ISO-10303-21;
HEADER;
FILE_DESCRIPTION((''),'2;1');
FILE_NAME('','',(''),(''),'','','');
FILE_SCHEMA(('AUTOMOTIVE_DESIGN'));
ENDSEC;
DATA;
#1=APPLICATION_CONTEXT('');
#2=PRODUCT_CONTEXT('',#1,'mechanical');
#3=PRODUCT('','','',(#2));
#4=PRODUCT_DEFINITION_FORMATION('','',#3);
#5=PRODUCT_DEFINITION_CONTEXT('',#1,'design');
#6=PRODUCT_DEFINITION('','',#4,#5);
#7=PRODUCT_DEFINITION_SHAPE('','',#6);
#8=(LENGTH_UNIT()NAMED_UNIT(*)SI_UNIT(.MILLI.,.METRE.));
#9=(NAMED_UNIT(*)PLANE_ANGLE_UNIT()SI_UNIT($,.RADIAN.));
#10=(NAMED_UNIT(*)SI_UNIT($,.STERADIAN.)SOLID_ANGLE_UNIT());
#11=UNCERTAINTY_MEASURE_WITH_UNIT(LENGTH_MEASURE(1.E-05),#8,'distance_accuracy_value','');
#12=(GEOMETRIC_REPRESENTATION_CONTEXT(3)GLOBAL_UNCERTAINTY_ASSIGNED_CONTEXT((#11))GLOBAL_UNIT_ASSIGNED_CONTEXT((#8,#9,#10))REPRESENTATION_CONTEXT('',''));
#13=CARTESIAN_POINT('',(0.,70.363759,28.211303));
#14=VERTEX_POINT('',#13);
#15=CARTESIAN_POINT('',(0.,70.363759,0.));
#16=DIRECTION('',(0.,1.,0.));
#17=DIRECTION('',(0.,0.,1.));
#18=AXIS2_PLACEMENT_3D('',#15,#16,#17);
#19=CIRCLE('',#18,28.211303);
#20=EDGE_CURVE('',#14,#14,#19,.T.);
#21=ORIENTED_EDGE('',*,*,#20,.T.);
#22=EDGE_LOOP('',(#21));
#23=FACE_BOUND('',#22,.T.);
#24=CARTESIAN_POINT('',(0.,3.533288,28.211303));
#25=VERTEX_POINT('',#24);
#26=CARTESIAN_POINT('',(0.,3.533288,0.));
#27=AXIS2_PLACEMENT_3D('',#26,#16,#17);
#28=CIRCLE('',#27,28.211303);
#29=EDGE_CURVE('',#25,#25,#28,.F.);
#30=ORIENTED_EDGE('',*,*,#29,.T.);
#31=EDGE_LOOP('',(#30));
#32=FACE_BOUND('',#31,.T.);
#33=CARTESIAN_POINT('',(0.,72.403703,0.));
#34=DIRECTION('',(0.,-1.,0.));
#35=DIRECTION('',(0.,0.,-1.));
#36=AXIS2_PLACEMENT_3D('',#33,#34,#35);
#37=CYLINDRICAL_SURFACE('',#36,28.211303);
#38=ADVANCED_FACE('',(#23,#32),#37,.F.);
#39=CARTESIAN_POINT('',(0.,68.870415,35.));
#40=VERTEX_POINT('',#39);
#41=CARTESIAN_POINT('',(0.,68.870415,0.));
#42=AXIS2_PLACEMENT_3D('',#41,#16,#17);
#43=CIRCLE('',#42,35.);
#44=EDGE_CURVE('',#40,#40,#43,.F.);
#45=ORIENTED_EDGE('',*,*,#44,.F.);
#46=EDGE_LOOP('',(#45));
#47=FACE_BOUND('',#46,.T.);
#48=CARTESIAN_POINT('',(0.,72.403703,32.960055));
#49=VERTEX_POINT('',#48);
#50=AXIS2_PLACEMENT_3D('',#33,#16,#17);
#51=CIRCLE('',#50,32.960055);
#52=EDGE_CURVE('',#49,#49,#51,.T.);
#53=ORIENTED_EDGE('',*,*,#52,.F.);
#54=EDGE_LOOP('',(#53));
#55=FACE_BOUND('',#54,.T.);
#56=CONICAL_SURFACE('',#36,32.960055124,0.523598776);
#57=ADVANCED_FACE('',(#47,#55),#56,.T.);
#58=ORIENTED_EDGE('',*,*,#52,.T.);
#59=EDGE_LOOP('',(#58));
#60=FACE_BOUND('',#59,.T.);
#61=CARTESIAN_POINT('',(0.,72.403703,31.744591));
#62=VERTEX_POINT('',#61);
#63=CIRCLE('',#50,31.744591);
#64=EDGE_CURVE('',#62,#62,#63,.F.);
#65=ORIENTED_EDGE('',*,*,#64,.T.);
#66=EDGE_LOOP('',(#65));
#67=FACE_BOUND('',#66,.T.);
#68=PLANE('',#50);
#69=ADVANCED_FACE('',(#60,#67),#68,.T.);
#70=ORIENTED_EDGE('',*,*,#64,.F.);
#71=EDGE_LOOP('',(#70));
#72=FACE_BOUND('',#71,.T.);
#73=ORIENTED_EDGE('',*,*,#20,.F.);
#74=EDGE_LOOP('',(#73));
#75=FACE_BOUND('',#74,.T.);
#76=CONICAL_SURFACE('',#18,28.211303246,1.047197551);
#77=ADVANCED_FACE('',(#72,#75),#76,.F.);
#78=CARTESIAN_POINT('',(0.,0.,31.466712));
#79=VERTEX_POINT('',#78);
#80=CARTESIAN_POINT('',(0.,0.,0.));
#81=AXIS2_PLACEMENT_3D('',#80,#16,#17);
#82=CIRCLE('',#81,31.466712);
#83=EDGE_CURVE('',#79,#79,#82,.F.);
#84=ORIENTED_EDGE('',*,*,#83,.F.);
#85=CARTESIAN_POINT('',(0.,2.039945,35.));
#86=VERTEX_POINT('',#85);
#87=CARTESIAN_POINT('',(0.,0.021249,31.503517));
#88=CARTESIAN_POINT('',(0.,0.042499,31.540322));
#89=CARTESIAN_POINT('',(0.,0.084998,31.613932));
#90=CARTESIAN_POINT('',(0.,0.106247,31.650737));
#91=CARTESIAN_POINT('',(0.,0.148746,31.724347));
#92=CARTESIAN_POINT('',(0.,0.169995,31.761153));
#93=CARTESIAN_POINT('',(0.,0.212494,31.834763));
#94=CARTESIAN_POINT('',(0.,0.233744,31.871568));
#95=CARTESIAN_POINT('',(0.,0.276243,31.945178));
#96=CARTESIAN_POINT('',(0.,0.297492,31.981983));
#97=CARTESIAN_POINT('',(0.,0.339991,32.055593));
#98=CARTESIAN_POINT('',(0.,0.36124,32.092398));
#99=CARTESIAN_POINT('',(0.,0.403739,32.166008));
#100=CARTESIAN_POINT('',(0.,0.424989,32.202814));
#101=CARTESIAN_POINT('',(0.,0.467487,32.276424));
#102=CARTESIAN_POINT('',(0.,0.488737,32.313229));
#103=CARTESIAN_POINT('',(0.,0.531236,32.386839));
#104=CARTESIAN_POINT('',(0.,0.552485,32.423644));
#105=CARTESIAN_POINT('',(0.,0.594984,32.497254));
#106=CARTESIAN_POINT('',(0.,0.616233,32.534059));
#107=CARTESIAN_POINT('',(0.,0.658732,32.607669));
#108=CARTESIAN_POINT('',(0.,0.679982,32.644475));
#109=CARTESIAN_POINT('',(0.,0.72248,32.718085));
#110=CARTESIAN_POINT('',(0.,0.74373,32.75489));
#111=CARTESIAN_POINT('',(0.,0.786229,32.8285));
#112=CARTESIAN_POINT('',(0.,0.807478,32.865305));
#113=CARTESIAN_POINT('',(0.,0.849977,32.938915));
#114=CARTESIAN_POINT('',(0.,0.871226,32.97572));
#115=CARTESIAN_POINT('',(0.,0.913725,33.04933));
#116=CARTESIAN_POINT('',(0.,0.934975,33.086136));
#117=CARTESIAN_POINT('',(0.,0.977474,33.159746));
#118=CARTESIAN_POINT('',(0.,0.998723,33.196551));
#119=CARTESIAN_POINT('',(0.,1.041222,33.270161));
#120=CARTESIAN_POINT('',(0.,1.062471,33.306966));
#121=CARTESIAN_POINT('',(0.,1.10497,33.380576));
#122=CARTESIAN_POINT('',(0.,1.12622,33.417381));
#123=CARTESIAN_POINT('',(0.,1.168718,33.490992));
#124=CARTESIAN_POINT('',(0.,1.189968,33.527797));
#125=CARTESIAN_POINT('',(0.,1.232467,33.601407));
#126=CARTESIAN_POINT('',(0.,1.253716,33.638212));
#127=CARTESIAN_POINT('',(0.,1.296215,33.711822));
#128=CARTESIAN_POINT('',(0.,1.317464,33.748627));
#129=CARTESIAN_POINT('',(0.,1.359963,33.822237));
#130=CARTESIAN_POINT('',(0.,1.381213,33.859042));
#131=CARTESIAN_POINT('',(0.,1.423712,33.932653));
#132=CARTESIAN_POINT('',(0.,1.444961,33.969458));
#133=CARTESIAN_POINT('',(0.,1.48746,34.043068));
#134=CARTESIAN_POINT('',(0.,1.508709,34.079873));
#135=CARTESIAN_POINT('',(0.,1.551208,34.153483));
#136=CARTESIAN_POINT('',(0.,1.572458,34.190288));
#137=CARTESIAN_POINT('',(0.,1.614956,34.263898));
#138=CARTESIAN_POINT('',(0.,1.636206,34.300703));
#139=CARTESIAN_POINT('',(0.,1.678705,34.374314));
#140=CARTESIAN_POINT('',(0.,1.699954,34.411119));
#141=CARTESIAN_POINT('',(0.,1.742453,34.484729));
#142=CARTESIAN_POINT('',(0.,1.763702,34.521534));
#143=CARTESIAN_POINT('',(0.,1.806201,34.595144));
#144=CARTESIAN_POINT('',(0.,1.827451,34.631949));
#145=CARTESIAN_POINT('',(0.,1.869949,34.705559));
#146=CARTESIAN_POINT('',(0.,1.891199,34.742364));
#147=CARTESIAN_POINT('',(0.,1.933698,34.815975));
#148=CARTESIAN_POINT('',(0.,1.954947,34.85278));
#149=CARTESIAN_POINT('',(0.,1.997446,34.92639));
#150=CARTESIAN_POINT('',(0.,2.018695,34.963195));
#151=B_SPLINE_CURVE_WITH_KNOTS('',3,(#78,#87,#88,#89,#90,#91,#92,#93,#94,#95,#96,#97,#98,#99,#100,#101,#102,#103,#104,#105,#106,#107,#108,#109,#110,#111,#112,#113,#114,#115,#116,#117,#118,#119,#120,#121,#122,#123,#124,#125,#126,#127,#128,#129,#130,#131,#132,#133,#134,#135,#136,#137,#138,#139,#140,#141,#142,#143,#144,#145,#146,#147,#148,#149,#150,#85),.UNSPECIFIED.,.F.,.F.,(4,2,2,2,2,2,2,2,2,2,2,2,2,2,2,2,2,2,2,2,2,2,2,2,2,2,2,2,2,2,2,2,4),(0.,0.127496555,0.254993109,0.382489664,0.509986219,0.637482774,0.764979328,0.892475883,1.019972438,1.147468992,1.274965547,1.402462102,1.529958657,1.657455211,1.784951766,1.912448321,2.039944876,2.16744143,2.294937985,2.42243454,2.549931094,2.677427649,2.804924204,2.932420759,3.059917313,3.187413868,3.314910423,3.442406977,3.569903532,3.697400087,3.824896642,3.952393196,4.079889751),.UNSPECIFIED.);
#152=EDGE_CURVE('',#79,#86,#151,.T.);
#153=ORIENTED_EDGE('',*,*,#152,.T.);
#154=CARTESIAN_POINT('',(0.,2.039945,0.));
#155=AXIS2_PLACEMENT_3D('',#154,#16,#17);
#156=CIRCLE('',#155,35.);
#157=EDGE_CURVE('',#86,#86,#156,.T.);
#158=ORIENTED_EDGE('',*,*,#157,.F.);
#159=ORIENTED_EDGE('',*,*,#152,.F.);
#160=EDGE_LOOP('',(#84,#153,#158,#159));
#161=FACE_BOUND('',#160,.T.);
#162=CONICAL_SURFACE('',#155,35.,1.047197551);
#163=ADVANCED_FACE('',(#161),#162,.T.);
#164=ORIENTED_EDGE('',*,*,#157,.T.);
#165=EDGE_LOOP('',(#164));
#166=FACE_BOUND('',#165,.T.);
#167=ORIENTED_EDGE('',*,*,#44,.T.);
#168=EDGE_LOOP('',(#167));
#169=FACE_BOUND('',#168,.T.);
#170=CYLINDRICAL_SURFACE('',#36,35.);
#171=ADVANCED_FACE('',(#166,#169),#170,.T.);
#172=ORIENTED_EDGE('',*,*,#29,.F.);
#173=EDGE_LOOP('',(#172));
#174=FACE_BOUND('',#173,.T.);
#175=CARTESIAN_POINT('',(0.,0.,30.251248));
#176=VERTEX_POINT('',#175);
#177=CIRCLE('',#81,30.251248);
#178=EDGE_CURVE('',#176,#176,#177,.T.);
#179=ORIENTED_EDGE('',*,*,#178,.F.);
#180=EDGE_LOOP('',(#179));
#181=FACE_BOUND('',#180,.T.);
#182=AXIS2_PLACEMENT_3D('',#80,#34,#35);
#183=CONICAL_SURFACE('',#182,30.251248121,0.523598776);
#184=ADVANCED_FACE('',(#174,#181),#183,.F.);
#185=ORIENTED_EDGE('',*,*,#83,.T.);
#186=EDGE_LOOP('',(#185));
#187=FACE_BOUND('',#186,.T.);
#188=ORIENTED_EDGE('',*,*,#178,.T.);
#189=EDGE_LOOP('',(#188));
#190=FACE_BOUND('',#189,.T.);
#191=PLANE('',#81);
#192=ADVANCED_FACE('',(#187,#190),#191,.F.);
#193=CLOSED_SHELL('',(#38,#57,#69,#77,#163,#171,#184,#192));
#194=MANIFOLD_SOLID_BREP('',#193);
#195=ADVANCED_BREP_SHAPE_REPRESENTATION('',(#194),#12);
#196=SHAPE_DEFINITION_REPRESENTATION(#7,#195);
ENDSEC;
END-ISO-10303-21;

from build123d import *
from OCP.BRepFilletAPI import BRepFilletAPI_MakeChamfer

# Parameters (mm, degrees)
SKETCH1_R           = 35
BOSS_EXTRUDE1_DEPTH = 72.403703457
SKETCH2_R           = 28.211303246
CUT_EXTRUDE1_DEPTH  = 88.705736838
CHAMFER1_SIZE       = 3.533288169
CHAMFER1_SIZE2      = 2.039944876


with BuildPart() as part:
    # Sketch1 → Boss-Extrude1 (new body)
    with BuildSketch(Plane(origin=(0, 0, 0), x_dir=(1, 0, 0), z_dir=(0, 1, 0))):
        Circle(SKETCH1_R)
    extrude(amount=BOSS_EXTRUDE1_DEPTH)

    # Sketch2 → Cut-Extrude1 (cut, through all)
    with BuildSketch(Plane(origin=(0, 0, 0), x_dir=(1, 0, 0), z_dir=(0, 1, 0))):
        Circle(SKETCH2_R)
    extrude(amount=CUT_EXTRUDE1_DEPTH, mode=Mode.SUBTRACT)

    # Chamfer1: one chamfer whose edges measure the first distance from different faces: ONE call of the kernel's chamfer builder (chamfer() names one face for all edges)
    chamfer1_edges_1 = [part.edges().sort_by_distance(p)[0] for p in [
        (-28.211303246, 72.403703457, 0),
    ]]
    chamfer1_side_1 = [part.faces().sort_by_distance(p)[0] for p in [
        (-34.010050506, 72.403703457, 0),
    ]]
    chamfer1_edges_2 = [part.edges().sort_by_distance(p)[0] for p in [
        (-28.211303246, 0, 0),
    ]]
    chamfer1_side_2 = [part.faces().sort_by_distance(p)[0] for p in [
        (-28.211303246, 36.201851729, 0),
    ]]
    chamfer1_edges_3 = [part.edges().sort_by_distance(p)[0] for p in [
        (-35, 0, 0),
    ]]
    chamfer1_side_3 = [part.faces().sort_by_distance(p)[0] for p in [
        (-34.010050506, 0, 0),
    ]]
    chamfer1_edges_4 = [part.edges().sort_by_distance(p)[0] for p in [
        (-35, 72.403703457, 0),
    ]]
    chamfer1_side_4 = [part.faces().sort_by_distance(p)[0] for p in [
        (-35, 36.201851729, 0),
    ]]
    chamfer1 = BRepFilletAPI_MakeChamfer(part.part.solid().wrapped)
    for e in chamfer1_edges_1:
        chamfer1.Add(CHAMFER1_SIZE, CHAMFER1_SIZE2, e.wrapped, chamfer1_side_1[0].wrapped)  # the first distance lies on this face
    for e in chamfer1_edges_2:
        chamfer1.Add(CHAMFER1_SIZE, CHAMFER1_SIZE2, e.wrapped, chamfer1_side_2[0].wrapped)  # the first distance lies on this face
    for e in chamfer1_edges_3:
        chamfer1.Add(CHAMFER1_SIZE, CHAMFER1_SIZE2, e.wrapped, chamfer1_side_3[0].wrapped)  # the first distance lies on this face
    for e in chamfer1_edges_4:
        chamfer1.Add(CHAMFER1_SIZE, CHAMFER1_SIZE2, e.wrapped, chamfer1_side_4[0].wrapped)  # the first distance lies on this face
    add(Compound.cast(chamfer1.Shape()), mode=Mode.REPLACE)


solid = part.part
